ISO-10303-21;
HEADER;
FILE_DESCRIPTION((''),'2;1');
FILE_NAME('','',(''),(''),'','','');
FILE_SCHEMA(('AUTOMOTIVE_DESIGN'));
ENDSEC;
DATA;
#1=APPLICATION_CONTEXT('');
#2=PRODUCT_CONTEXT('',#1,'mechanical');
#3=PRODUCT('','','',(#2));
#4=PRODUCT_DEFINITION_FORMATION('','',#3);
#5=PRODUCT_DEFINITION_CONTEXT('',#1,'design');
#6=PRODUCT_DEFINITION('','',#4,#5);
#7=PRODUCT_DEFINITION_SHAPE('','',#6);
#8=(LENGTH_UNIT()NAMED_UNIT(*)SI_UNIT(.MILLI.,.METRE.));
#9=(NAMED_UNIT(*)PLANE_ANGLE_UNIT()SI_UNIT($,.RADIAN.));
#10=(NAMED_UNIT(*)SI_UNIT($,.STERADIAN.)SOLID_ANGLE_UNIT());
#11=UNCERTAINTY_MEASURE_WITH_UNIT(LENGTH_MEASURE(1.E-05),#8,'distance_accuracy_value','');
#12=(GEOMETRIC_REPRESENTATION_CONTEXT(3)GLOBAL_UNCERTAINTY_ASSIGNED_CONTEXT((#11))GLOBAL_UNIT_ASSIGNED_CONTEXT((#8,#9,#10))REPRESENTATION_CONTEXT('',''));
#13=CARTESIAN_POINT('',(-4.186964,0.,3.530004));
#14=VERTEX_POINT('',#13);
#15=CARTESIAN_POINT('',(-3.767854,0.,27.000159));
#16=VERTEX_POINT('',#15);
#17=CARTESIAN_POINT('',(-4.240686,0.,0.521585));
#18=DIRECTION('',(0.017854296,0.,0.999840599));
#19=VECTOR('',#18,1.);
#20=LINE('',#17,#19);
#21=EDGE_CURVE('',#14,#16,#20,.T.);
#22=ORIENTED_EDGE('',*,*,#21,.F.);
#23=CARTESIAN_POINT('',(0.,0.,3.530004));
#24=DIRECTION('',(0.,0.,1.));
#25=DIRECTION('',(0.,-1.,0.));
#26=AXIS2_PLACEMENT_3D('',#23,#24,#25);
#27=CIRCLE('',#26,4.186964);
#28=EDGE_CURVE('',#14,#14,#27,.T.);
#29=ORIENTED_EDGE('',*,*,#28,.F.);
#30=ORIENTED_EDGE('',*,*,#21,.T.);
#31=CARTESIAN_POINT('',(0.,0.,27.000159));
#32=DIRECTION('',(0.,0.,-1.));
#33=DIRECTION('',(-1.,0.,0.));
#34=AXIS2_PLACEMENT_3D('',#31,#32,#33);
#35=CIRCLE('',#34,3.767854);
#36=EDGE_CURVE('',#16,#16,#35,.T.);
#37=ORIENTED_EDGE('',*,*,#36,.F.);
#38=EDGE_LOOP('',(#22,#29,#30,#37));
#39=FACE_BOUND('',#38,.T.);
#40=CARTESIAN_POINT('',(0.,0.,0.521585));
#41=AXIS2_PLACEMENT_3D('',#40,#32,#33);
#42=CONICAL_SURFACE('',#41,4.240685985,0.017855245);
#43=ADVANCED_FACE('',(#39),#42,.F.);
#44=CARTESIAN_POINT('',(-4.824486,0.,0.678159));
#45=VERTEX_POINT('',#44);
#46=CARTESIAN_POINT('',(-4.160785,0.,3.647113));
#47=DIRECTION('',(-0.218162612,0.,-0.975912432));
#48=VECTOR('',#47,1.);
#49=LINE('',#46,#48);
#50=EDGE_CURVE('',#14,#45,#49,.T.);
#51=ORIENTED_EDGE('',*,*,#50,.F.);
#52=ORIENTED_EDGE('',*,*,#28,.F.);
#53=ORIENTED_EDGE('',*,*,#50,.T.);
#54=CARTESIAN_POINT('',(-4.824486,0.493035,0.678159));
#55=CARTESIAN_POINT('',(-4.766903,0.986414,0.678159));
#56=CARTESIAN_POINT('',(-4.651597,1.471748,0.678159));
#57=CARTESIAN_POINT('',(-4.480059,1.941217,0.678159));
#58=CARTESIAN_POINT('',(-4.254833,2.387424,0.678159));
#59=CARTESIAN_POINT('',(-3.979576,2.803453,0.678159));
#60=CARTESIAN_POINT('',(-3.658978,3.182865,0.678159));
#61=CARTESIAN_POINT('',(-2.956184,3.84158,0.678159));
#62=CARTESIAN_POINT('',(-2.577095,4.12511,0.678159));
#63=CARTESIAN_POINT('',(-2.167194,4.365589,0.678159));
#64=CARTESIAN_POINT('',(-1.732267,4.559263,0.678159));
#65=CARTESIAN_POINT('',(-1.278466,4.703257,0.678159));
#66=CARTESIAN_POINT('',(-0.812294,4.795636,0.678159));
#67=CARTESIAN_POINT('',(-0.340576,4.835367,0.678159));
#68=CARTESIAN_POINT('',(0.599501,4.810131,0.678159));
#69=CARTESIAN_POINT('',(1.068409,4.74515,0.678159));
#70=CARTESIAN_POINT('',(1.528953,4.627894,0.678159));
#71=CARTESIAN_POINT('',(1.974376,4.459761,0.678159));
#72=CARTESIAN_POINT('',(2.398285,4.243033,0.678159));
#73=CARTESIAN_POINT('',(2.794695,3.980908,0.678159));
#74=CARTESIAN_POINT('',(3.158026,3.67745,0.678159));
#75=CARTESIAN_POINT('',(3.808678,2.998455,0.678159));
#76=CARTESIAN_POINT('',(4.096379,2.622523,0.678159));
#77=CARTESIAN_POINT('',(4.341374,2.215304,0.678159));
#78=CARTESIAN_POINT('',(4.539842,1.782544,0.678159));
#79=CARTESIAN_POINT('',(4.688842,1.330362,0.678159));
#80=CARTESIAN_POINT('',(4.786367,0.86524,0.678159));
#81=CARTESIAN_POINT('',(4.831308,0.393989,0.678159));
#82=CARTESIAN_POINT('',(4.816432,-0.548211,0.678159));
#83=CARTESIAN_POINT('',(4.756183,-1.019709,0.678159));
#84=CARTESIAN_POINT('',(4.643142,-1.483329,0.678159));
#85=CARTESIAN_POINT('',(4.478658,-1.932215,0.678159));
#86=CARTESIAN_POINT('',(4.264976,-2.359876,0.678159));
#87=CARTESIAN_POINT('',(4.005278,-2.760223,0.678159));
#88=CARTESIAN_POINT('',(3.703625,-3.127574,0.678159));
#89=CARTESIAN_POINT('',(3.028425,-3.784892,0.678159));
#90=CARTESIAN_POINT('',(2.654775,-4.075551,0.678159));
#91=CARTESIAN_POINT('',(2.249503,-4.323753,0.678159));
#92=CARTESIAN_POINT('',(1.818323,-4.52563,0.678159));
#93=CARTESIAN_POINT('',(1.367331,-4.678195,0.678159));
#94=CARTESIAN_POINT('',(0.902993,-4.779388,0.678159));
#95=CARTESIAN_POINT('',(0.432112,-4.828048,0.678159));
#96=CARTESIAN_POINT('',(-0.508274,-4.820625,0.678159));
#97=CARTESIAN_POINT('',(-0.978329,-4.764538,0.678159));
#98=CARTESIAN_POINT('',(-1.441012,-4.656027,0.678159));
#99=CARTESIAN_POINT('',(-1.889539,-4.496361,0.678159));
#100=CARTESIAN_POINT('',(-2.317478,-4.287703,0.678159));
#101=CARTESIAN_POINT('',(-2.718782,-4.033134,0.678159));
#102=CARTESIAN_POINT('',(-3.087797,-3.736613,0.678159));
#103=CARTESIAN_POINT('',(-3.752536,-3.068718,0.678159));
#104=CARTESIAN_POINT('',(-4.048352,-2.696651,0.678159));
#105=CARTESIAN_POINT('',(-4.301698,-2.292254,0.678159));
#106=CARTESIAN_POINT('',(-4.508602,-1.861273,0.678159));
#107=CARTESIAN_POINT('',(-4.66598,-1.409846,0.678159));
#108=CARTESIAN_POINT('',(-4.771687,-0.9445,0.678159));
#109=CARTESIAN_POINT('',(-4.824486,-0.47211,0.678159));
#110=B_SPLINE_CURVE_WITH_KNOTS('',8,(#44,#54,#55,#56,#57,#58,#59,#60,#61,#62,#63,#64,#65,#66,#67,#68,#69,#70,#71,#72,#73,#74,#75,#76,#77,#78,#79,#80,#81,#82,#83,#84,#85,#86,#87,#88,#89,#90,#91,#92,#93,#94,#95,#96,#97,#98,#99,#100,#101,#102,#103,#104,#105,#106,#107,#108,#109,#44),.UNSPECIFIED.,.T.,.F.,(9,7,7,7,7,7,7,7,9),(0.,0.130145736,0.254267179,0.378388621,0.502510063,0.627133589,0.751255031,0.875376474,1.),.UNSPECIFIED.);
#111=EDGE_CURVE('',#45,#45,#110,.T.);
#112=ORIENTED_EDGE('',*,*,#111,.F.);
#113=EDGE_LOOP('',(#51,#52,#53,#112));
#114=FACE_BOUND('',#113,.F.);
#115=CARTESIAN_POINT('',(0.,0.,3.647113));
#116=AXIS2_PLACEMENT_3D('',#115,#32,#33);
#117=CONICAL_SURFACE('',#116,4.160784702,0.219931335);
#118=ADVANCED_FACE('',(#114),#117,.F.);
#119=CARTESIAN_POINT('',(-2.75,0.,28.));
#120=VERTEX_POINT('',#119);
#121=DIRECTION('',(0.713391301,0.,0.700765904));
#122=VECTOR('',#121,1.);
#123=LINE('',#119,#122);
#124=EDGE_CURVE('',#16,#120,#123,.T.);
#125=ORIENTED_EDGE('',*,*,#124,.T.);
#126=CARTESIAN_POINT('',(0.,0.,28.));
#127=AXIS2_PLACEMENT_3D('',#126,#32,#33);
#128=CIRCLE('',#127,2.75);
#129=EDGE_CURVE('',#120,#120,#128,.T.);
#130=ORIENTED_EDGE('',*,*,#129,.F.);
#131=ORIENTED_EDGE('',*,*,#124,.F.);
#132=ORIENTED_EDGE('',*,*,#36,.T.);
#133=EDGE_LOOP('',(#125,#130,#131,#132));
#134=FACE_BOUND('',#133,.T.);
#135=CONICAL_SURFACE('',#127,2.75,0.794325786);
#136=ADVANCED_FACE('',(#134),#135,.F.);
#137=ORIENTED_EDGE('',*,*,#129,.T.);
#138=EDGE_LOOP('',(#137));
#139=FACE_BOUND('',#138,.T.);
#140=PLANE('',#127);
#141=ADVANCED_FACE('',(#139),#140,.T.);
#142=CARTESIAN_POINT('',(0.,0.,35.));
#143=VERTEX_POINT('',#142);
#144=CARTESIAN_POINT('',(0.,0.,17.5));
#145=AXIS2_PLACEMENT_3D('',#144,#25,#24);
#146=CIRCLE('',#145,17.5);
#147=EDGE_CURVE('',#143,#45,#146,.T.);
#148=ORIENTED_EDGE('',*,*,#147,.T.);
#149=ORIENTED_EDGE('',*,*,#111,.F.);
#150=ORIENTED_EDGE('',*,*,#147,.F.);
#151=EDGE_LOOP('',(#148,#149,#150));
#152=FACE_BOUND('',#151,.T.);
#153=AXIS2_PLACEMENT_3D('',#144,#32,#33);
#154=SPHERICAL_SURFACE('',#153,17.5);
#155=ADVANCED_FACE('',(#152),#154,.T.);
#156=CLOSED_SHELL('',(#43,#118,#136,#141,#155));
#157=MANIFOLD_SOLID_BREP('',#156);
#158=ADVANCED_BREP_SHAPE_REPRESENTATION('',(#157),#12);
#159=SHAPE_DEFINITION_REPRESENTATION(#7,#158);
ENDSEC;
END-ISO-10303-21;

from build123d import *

# Parameters (mm, degrees)
F4_SIZE = 1


# Not quite as in the source:
# - a fillet or chamfer that OpenCascade refuses, or shapes differently, is made with other operations: its cross-section is extruded or revolved along the edge and cut away or added


with BuildPart() as f1:
    # F0 (on Front) → F1 (revolve)
    with BuildSketch(Plane.XZ):
        with BuildLine():
            Line((0, 28), (0, 35))
            ThreePointArc((0, 35), (-17.3691143388, 19.6363209229), (-4.2406859855, 0.5215848098))
            Line((-4.2406859855, 0.5215848098), (-3.75, 28))
            Line((-3.75, 28), (0, 28))
        make_face()
    revolve(axis=Axis((0, 0, 16.7157072574), (0, 0, -1)))

    # F2: chamfer of 0.5 x 3 on 1 edges, made by hand

    # F2_s1 → F2_t2 (revolve, cut)
    with BuildSketch(Plane.XZ):
        with BuildLine():
            Line((-4.1607847025, 3.6471133949), (-4.8506659959, 0.5610496404))
            Line((-4.8506659959, 0.5610496404), (-4.8672070924, 0.5033747574))
            ThreePointArc((-4.8672070924, 0.5033747574), (-4.5463653864, 0.5387452771), (-4.2552254803, 0.4633731005))
            Line((-4.2552254803, 0.4633731005), (-4.1806955496, 0.520513552))
            ThreePointArc((-4.1806955496, 0.520513552), (-4.152785205, 2.0834928499), (-4.1007942666, 3.6460421371))
            Line((-4.1007942666, 3.6460421371), (-4.1607847025, 3.6471133949))
        make_face()
    revolve(axis=Axis((0, 0, 0.5215848098), (0, 0, -1)), mode=Mode.SUBTRACT)

    # F4
    f4_edges = [f1.edges().sort_by_distance(p)[0] for p in [
        (3.75, 0, 28),
    ]]
    chamfer(f4_edges, length=F4_SIZE)


solid = f1.part
